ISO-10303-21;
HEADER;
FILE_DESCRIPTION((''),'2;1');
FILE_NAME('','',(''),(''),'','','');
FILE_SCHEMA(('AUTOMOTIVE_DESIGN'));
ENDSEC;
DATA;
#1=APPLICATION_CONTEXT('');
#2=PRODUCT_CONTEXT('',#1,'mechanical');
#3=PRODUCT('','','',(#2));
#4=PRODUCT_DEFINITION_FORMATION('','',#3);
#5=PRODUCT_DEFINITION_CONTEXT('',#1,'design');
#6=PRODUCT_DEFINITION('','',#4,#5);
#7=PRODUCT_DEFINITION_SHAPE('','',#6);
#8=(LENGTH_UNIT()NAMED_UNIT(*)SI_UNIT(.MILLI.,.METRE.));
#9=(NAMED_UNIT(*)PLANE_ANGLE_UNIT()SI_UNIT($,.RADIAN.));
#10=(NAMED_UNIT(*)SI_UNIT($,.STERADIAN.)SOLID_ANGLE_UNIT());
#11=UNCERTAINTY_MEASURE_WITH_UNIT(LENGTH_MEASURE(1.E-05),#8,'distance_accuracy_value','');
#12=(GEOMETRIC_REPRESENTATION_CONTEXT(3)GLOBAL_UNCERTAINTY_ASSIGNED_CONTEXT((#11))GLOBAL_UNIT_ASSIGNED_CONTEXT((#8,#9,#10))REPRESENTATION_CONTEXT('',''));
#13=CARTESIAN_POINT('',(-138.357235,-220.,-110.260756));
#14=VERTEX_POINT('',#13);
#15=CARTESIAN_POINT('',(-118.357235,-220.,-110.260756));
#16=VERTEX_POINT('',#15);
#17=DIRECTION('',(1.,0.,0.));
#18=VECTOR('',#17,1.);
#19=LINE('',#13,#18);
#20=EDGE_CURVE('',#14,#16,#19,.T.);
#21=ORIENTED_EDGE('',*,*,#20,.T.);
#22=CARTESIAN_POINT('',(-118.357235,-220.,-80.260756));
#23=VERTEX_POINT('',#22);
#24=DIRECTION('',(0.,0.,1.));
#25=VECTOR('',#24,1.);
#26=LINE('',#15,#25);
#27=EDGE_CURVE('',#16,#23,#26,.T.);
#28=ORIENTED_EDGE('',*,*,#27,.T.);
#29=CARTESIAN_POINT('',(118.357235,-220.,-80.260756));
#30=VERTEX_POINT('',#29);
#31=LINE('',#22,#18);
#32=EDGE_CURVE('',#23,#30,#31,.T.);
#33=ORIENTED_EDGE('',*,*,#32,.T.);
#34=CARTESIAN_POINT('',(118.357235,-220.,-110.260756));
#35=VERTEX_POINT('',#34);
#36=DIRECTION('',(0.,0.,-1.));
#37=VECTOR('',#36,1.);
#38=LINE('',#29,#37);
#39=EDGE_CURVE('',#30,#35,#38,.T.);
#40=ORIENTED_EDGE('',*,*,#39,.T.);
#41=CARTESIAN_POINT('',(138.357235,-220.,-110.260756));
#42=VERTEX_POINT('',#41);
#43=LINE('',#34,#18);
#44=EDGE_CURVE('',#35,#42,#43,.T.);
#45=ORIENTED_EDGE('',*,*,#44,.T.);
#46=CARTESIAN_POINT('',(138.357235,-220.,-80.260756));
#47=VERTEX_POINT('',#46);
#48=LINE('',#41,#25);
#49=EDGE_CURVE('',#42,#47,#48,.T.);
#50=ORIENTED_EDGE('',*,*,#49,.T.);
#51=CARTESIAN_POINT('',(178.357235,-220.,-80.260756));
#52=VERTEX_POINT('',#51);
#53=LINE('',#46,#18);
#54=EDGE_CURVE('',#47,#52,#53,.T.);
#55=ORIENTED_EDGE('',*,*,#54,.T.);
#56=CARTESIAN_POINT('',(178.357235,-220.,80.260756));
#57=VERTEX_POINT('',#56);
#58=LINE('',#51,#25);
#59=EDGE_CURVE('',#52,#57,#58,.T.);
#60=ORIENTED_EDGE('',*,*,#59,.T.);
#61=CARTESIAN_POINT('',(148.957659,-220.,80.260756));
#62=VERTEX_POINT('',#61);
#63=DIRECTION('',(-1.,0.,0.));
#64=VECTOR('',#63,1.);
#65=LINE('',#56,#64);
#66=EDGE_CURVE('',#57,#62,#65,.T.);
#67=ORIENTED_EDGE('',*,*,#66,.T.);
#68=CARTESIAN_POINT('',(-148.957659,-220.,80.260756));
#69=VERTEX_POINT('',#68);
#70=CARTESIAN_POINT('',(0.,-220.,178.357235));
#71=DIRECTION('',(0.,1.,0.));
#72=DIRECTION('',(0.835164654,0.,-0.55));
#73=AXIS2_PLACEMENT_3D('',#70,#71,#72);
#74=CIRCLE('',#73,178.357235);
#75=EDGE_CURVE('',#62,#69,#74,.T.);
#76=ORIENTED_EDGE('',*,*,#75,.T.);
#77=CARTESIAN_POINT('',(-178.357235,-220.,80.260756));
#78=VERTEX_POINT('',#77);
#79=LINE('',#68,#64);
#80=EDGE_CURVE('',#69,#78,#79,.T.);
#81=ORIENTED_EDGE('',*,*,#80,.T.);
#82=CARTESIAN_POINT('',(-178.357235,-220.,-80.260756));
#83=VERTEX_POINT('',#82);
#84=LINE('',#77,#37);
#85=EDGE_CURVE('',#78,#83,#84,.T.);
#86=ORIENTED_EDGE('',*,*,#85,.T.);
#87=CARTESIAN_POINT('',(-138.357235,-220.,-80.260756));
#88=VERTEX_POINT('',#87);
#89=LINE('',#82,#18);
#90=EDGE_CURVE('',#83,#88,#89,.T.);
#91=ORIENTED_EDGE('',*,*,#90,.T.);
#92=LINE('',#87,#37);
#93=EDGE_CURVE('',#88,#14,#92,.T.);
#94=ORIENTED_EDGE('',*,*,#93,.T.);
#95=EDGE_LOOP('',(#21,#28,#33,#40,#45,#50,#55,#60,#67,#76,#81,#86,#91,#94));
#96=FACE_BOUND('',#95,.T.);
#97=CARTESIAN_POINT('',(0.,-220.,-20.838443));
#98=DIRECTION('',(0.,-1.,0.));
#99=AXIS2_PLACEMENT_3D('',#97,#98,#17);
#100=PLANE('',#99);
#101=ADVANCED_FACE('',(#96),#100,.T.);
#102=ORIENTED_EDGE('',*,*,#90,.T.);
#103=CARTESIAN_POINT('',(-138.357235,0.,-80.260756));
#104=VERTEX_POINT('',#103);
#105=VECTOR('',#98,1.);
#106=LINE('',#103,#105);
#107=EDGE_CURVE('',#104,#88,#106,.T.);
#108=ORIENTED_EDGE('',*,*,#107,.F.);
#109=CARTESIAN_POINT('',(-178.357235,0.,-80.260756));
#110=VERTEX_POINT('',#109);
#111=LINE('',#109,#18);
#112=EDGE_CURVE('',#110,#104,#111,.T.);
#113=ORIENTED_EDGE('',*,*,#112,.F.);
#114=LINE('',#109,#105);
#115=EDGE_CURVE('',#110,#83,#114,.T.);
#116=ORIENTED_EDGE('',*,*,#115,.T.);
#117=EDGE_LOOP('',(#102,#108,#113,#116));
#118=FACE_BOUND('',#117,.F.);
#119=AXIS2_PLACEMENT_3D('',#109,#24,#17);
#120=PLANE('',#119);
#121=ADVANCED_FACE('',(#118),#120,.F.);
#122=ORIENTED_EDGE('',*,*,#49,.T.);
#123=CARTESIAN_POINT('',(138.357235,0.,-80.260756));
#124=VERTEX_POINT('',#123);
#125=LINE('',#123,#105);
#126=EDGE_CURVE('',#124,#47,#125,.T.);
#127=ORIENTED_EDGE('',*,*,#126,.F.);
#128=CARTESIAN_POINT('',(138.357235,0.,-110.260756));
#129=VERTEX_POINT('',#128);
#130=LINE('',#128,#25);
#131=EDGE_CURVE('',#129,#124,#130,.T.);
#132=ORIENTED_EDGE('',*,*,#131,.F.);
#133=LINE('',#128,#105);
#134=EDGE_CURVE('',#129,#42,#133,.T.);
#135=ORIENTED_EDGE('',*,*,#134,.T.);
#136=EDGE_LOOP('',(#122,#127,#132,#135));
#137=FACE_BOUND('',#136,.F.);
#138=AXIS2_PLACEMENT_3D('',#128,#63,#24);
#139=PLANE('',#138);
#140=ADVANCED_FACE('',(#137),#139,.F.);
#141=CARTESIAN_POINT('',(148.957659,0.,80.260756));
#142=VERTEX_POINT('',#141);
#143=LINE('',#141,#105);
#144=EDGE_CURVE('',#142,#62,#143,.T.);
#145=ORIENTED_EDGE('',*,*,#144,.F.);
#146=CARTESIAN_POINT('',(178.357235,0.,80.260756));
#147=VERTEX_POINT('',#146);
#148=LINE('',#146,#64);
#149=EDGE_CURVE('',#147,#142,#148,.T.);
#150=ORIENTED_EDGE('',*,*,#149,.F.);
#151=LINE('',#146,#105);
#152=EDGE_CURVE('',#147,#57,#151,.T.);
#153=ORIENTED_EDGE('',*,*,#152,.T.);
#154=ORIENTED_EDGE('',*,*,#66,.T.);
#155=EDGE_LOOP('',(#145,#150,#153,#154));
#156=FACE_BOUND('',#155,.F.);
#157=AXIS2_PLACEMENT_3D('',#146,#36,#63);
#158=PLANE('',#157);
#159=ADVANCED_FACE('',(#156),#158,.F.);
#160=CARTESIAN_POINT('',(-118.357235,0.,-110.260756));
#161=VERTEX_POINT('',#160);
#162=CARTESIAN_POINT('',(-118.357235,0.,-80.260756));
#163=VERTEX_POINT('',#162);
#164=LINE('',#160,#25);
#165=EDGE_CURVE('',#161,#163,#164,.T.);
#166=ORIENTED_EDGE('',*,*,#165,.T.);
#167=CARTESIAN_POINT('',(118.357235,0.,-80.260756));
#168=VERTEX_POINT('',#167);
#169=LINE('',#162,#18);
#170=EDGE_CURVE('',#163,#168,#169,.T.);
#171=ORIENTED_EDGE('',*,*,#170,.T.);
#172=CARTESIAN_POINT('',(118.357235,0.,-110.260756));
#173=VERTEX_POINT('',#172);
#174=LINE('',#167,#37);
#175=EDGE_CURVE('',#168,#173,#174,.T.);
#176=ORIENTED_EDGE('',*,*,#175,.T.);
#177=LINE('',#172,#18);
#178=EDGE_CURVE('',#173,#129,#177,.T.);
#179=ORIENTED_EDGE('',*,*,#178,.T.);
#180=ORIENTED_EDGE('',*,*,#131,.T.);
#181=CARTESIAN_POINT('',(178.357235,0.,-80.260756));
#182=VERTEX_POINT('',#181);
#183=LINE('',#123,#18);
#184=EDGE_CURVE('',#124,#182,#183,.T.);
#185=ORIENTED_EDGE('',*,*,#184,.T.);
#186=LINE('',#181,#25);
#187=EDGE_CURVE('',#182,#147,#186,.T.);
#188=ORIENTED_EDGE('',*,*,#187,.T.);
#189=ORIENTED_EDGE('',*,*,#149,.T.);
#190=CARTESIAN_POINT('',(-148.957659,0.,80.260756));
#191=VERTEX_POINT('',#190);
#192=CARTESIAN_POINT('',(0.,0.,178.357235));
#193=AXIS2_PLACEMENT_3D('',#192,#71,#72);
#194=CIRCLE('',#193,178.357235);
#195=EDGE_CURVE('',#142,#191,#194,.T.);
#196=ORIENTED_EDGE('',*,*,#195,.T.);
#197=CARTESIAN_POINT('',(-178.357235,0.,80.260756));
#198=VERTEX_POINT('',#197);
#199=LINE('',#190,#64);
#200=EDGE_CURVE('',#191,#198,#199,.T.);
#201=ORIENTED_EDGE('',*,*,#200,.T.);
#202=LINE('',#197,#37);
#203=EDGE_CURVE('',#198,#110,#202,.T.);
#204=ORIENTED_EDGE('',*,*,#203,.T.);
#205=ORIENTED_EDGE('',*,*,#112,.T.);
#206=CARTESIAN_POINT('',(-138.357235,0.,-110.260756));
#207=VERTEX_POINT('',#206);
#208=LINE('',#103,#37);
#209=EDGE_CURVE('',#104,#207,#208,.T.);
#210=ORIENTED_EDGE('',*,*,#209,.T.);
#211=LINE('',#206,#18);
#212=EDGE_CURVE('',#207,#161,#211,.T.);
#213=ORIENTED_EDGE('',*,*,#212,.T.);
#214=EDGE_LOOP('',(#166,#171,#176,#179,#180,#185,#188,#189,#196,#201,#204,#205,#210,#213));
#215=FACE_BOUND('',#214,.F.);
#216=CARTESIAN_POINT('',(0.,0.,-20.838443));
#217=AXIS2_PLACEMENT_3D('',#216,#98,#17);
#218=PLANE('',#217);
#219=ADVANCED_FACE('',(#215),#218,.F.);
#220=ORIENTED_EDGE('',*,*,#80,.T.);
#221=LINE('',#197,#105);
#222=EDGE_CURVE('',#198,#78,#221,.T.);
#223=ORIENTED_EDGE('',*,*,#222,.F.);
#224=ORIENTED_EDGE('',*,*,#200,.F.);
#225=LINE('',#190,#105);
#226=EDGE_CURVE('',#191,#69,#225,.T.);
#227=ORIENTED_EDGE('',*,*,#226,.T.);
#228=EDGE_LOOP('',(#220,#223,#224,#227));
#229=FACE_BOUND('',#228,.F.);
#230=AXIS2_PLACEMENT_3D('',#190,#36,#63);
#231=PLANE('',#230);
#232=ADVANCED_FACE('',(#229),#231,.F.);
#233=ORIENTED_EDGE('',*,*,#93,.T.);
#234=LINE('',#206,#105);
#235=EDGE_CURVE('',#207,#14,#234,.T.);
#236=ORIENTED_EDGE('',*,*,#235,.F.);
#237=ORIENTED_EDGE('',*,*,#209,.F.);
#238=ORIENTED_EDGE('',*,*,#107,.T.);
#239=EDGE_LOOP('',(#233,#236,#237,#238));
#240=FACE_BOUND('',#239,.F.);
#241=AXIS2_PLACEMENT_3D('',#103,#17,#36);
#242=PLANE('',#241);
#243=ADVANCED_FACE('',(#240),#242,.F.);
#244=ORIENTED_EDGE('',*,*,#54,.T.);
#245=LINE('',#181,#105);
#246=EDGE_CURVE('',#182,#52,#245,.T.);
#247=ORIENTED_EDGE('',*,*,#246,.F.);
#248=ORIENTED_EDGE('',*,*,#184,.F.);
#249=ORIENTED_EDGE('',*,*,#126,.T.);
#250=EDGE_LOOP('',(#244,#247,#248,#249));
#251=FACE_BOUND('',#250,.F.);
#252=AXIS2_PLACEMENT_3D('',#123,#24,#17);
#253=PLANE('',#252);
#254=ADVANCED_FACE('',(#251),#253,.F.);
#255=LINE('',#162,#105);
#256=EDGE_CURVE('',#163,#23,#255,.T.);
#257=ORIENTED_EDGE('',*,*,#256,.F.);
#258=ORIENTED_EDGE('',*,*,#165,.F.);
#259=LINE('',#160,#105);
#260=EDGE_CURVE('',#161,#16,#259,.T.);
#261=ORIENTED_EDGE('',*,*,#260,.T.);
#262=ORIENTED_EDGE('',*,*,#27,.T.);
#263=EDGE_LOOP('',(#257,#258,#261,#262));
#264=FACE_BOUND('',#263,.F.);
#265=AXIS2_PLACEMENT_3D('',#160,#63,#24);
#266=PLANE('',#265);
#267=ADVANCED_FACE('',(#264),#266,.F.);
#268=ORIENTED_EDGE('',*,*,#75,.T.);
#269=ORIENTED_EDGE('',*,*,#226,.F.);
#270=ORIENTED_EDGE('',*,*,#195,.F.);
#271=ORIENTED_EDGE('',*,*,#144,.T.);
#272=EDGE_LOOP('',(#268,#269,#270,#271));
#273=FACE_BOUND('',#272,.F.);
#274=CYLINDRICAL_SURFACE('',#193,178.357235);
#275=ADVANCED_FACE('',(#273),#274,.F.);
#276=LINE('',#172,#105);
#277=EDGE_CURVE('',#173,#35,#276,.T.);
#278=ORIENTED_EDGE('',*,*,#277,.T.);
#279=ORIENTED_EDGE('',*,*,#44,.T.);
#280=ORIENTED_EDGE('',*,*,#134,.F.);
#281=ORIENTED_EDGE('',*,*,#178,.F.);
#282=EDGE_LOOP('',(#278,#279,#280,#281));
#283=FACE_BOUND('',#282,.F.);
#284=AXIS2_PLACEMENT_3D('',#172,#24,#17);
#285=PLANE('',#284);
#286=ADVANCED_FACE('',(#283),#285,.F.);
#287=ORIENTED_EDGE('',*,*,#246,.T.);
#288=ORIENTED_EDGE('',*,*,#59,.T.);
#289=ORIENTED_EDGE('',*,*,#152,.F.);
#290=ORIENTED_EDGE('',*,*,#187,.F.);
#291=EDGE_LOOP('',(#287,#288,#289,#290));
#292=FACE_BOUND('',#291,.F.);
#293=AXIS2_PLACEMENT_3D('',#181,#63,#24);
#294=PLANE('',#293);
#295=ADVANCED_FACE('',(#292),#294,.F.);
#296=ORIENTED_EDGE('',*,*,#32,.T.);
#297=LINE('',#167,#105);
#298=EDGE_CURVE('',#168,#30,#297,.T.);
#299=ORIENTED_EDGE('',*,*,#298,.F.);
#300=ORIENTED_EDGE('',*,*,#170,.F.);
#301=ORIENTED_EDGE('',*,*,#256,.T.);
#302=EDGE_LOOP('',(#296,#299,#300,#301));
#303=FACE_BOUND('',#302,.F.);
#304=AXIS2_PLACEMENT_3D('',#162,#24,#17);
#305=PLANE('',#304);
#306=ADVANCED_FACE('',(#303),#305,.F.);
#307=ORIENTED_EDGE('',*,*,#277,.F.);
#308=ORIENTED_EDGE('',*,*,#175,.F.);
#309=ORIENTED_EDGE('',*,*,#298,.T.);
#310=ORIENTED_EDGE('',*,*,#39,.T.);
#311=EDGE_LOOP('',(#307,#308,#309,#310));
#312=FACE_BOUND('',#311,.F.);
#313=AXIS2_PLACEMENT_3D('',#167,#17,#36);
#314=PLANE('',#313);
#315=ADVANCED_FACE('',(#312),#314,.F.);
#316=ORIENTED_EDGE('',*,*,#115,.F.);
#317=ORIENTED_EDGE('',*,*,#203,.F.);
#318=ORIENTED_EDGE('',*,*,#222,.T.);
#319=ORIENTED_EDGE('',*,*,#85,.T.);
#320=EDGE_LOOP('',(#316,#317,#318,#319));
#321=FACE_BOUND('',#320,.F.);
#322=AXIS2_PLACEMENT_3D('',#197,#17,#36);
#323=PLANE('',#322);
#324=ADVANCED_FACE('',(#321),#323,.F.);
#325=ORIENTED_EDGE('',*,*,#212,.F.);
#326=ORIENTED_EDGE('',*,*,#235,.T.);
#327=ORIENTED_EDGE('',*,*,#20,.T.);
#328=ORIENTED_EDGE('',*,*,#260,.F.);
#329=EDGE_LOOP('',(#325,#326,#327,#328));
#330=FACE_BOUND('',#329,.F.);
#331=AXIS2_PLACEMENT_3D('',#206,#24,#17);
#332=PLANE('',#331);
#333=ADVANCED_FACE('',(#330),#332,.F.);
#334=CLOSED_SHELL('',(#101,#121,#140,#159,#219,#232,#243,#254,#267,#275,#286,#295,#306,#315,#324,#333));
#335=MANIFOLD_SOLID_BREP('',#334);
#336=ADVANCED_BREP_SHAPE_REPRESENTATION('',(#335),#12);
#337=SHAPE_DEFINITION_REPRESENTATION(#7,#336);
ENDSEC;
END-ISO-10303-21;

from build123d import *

# Parameters (mm, degrees)
F1_DEPTH = 220


# Not quite as in the source:
# - the program builds the solid bodies; features that only make, move or delete a surface that nothing else refers to are left out


with BuildPart() as f1:
    # F0 (on Front) → F1 (new body)
    with BuildSketch(Plane.XZ):
        with BuildLine():
            Line((-178.3572353468, 80.260755906), (-178.3572353468, -80.260755906))
            Line((-178.3572353468, -80.260755906), (-138.3572353468, -80.260755906))
            Line((-138.3572353468, -80.260755906), (-138.3572353468, -110.260755906))
            Line((-138.3572353468, -110.260755906), (-118.3572353468, -110.260755906))
            Line((-118.3572353468, -110.260755906), (-118.3572353468, -80.260755906))
            Line((-118.3572353468, -80.260755906), (118.3572353468, -80.260755906))
            Line((118.3572353468, -80.260755906), (118.3572353468, -110.260755906))
            Line((118.3572353468, -110.260755906), (138.3572353468, -110.260755906))
            Line((138.3572353468, -110.260755906), (138.3572353468, -80.260755906))
            Line((138.3572353468, -80.260755906), (178.3572353468, -80.260755906))
            Line((178.3572353468, -80.260755906), (178.3572353468, 80.260755906))
            Line((178.3572353468, 80.260755906), (148.9576588225, 80.260755906))
            ThreePointArc((148.9576588225, 80.260755906), (0, 0), (-148.9576588225, 80.260755906))
            Line((-148.9576588225, 80.260755906), (-178.3572353468, 80.260755906))
        make_face()
    extrude(amount=F1_DEPTH)


solid = f1.part
